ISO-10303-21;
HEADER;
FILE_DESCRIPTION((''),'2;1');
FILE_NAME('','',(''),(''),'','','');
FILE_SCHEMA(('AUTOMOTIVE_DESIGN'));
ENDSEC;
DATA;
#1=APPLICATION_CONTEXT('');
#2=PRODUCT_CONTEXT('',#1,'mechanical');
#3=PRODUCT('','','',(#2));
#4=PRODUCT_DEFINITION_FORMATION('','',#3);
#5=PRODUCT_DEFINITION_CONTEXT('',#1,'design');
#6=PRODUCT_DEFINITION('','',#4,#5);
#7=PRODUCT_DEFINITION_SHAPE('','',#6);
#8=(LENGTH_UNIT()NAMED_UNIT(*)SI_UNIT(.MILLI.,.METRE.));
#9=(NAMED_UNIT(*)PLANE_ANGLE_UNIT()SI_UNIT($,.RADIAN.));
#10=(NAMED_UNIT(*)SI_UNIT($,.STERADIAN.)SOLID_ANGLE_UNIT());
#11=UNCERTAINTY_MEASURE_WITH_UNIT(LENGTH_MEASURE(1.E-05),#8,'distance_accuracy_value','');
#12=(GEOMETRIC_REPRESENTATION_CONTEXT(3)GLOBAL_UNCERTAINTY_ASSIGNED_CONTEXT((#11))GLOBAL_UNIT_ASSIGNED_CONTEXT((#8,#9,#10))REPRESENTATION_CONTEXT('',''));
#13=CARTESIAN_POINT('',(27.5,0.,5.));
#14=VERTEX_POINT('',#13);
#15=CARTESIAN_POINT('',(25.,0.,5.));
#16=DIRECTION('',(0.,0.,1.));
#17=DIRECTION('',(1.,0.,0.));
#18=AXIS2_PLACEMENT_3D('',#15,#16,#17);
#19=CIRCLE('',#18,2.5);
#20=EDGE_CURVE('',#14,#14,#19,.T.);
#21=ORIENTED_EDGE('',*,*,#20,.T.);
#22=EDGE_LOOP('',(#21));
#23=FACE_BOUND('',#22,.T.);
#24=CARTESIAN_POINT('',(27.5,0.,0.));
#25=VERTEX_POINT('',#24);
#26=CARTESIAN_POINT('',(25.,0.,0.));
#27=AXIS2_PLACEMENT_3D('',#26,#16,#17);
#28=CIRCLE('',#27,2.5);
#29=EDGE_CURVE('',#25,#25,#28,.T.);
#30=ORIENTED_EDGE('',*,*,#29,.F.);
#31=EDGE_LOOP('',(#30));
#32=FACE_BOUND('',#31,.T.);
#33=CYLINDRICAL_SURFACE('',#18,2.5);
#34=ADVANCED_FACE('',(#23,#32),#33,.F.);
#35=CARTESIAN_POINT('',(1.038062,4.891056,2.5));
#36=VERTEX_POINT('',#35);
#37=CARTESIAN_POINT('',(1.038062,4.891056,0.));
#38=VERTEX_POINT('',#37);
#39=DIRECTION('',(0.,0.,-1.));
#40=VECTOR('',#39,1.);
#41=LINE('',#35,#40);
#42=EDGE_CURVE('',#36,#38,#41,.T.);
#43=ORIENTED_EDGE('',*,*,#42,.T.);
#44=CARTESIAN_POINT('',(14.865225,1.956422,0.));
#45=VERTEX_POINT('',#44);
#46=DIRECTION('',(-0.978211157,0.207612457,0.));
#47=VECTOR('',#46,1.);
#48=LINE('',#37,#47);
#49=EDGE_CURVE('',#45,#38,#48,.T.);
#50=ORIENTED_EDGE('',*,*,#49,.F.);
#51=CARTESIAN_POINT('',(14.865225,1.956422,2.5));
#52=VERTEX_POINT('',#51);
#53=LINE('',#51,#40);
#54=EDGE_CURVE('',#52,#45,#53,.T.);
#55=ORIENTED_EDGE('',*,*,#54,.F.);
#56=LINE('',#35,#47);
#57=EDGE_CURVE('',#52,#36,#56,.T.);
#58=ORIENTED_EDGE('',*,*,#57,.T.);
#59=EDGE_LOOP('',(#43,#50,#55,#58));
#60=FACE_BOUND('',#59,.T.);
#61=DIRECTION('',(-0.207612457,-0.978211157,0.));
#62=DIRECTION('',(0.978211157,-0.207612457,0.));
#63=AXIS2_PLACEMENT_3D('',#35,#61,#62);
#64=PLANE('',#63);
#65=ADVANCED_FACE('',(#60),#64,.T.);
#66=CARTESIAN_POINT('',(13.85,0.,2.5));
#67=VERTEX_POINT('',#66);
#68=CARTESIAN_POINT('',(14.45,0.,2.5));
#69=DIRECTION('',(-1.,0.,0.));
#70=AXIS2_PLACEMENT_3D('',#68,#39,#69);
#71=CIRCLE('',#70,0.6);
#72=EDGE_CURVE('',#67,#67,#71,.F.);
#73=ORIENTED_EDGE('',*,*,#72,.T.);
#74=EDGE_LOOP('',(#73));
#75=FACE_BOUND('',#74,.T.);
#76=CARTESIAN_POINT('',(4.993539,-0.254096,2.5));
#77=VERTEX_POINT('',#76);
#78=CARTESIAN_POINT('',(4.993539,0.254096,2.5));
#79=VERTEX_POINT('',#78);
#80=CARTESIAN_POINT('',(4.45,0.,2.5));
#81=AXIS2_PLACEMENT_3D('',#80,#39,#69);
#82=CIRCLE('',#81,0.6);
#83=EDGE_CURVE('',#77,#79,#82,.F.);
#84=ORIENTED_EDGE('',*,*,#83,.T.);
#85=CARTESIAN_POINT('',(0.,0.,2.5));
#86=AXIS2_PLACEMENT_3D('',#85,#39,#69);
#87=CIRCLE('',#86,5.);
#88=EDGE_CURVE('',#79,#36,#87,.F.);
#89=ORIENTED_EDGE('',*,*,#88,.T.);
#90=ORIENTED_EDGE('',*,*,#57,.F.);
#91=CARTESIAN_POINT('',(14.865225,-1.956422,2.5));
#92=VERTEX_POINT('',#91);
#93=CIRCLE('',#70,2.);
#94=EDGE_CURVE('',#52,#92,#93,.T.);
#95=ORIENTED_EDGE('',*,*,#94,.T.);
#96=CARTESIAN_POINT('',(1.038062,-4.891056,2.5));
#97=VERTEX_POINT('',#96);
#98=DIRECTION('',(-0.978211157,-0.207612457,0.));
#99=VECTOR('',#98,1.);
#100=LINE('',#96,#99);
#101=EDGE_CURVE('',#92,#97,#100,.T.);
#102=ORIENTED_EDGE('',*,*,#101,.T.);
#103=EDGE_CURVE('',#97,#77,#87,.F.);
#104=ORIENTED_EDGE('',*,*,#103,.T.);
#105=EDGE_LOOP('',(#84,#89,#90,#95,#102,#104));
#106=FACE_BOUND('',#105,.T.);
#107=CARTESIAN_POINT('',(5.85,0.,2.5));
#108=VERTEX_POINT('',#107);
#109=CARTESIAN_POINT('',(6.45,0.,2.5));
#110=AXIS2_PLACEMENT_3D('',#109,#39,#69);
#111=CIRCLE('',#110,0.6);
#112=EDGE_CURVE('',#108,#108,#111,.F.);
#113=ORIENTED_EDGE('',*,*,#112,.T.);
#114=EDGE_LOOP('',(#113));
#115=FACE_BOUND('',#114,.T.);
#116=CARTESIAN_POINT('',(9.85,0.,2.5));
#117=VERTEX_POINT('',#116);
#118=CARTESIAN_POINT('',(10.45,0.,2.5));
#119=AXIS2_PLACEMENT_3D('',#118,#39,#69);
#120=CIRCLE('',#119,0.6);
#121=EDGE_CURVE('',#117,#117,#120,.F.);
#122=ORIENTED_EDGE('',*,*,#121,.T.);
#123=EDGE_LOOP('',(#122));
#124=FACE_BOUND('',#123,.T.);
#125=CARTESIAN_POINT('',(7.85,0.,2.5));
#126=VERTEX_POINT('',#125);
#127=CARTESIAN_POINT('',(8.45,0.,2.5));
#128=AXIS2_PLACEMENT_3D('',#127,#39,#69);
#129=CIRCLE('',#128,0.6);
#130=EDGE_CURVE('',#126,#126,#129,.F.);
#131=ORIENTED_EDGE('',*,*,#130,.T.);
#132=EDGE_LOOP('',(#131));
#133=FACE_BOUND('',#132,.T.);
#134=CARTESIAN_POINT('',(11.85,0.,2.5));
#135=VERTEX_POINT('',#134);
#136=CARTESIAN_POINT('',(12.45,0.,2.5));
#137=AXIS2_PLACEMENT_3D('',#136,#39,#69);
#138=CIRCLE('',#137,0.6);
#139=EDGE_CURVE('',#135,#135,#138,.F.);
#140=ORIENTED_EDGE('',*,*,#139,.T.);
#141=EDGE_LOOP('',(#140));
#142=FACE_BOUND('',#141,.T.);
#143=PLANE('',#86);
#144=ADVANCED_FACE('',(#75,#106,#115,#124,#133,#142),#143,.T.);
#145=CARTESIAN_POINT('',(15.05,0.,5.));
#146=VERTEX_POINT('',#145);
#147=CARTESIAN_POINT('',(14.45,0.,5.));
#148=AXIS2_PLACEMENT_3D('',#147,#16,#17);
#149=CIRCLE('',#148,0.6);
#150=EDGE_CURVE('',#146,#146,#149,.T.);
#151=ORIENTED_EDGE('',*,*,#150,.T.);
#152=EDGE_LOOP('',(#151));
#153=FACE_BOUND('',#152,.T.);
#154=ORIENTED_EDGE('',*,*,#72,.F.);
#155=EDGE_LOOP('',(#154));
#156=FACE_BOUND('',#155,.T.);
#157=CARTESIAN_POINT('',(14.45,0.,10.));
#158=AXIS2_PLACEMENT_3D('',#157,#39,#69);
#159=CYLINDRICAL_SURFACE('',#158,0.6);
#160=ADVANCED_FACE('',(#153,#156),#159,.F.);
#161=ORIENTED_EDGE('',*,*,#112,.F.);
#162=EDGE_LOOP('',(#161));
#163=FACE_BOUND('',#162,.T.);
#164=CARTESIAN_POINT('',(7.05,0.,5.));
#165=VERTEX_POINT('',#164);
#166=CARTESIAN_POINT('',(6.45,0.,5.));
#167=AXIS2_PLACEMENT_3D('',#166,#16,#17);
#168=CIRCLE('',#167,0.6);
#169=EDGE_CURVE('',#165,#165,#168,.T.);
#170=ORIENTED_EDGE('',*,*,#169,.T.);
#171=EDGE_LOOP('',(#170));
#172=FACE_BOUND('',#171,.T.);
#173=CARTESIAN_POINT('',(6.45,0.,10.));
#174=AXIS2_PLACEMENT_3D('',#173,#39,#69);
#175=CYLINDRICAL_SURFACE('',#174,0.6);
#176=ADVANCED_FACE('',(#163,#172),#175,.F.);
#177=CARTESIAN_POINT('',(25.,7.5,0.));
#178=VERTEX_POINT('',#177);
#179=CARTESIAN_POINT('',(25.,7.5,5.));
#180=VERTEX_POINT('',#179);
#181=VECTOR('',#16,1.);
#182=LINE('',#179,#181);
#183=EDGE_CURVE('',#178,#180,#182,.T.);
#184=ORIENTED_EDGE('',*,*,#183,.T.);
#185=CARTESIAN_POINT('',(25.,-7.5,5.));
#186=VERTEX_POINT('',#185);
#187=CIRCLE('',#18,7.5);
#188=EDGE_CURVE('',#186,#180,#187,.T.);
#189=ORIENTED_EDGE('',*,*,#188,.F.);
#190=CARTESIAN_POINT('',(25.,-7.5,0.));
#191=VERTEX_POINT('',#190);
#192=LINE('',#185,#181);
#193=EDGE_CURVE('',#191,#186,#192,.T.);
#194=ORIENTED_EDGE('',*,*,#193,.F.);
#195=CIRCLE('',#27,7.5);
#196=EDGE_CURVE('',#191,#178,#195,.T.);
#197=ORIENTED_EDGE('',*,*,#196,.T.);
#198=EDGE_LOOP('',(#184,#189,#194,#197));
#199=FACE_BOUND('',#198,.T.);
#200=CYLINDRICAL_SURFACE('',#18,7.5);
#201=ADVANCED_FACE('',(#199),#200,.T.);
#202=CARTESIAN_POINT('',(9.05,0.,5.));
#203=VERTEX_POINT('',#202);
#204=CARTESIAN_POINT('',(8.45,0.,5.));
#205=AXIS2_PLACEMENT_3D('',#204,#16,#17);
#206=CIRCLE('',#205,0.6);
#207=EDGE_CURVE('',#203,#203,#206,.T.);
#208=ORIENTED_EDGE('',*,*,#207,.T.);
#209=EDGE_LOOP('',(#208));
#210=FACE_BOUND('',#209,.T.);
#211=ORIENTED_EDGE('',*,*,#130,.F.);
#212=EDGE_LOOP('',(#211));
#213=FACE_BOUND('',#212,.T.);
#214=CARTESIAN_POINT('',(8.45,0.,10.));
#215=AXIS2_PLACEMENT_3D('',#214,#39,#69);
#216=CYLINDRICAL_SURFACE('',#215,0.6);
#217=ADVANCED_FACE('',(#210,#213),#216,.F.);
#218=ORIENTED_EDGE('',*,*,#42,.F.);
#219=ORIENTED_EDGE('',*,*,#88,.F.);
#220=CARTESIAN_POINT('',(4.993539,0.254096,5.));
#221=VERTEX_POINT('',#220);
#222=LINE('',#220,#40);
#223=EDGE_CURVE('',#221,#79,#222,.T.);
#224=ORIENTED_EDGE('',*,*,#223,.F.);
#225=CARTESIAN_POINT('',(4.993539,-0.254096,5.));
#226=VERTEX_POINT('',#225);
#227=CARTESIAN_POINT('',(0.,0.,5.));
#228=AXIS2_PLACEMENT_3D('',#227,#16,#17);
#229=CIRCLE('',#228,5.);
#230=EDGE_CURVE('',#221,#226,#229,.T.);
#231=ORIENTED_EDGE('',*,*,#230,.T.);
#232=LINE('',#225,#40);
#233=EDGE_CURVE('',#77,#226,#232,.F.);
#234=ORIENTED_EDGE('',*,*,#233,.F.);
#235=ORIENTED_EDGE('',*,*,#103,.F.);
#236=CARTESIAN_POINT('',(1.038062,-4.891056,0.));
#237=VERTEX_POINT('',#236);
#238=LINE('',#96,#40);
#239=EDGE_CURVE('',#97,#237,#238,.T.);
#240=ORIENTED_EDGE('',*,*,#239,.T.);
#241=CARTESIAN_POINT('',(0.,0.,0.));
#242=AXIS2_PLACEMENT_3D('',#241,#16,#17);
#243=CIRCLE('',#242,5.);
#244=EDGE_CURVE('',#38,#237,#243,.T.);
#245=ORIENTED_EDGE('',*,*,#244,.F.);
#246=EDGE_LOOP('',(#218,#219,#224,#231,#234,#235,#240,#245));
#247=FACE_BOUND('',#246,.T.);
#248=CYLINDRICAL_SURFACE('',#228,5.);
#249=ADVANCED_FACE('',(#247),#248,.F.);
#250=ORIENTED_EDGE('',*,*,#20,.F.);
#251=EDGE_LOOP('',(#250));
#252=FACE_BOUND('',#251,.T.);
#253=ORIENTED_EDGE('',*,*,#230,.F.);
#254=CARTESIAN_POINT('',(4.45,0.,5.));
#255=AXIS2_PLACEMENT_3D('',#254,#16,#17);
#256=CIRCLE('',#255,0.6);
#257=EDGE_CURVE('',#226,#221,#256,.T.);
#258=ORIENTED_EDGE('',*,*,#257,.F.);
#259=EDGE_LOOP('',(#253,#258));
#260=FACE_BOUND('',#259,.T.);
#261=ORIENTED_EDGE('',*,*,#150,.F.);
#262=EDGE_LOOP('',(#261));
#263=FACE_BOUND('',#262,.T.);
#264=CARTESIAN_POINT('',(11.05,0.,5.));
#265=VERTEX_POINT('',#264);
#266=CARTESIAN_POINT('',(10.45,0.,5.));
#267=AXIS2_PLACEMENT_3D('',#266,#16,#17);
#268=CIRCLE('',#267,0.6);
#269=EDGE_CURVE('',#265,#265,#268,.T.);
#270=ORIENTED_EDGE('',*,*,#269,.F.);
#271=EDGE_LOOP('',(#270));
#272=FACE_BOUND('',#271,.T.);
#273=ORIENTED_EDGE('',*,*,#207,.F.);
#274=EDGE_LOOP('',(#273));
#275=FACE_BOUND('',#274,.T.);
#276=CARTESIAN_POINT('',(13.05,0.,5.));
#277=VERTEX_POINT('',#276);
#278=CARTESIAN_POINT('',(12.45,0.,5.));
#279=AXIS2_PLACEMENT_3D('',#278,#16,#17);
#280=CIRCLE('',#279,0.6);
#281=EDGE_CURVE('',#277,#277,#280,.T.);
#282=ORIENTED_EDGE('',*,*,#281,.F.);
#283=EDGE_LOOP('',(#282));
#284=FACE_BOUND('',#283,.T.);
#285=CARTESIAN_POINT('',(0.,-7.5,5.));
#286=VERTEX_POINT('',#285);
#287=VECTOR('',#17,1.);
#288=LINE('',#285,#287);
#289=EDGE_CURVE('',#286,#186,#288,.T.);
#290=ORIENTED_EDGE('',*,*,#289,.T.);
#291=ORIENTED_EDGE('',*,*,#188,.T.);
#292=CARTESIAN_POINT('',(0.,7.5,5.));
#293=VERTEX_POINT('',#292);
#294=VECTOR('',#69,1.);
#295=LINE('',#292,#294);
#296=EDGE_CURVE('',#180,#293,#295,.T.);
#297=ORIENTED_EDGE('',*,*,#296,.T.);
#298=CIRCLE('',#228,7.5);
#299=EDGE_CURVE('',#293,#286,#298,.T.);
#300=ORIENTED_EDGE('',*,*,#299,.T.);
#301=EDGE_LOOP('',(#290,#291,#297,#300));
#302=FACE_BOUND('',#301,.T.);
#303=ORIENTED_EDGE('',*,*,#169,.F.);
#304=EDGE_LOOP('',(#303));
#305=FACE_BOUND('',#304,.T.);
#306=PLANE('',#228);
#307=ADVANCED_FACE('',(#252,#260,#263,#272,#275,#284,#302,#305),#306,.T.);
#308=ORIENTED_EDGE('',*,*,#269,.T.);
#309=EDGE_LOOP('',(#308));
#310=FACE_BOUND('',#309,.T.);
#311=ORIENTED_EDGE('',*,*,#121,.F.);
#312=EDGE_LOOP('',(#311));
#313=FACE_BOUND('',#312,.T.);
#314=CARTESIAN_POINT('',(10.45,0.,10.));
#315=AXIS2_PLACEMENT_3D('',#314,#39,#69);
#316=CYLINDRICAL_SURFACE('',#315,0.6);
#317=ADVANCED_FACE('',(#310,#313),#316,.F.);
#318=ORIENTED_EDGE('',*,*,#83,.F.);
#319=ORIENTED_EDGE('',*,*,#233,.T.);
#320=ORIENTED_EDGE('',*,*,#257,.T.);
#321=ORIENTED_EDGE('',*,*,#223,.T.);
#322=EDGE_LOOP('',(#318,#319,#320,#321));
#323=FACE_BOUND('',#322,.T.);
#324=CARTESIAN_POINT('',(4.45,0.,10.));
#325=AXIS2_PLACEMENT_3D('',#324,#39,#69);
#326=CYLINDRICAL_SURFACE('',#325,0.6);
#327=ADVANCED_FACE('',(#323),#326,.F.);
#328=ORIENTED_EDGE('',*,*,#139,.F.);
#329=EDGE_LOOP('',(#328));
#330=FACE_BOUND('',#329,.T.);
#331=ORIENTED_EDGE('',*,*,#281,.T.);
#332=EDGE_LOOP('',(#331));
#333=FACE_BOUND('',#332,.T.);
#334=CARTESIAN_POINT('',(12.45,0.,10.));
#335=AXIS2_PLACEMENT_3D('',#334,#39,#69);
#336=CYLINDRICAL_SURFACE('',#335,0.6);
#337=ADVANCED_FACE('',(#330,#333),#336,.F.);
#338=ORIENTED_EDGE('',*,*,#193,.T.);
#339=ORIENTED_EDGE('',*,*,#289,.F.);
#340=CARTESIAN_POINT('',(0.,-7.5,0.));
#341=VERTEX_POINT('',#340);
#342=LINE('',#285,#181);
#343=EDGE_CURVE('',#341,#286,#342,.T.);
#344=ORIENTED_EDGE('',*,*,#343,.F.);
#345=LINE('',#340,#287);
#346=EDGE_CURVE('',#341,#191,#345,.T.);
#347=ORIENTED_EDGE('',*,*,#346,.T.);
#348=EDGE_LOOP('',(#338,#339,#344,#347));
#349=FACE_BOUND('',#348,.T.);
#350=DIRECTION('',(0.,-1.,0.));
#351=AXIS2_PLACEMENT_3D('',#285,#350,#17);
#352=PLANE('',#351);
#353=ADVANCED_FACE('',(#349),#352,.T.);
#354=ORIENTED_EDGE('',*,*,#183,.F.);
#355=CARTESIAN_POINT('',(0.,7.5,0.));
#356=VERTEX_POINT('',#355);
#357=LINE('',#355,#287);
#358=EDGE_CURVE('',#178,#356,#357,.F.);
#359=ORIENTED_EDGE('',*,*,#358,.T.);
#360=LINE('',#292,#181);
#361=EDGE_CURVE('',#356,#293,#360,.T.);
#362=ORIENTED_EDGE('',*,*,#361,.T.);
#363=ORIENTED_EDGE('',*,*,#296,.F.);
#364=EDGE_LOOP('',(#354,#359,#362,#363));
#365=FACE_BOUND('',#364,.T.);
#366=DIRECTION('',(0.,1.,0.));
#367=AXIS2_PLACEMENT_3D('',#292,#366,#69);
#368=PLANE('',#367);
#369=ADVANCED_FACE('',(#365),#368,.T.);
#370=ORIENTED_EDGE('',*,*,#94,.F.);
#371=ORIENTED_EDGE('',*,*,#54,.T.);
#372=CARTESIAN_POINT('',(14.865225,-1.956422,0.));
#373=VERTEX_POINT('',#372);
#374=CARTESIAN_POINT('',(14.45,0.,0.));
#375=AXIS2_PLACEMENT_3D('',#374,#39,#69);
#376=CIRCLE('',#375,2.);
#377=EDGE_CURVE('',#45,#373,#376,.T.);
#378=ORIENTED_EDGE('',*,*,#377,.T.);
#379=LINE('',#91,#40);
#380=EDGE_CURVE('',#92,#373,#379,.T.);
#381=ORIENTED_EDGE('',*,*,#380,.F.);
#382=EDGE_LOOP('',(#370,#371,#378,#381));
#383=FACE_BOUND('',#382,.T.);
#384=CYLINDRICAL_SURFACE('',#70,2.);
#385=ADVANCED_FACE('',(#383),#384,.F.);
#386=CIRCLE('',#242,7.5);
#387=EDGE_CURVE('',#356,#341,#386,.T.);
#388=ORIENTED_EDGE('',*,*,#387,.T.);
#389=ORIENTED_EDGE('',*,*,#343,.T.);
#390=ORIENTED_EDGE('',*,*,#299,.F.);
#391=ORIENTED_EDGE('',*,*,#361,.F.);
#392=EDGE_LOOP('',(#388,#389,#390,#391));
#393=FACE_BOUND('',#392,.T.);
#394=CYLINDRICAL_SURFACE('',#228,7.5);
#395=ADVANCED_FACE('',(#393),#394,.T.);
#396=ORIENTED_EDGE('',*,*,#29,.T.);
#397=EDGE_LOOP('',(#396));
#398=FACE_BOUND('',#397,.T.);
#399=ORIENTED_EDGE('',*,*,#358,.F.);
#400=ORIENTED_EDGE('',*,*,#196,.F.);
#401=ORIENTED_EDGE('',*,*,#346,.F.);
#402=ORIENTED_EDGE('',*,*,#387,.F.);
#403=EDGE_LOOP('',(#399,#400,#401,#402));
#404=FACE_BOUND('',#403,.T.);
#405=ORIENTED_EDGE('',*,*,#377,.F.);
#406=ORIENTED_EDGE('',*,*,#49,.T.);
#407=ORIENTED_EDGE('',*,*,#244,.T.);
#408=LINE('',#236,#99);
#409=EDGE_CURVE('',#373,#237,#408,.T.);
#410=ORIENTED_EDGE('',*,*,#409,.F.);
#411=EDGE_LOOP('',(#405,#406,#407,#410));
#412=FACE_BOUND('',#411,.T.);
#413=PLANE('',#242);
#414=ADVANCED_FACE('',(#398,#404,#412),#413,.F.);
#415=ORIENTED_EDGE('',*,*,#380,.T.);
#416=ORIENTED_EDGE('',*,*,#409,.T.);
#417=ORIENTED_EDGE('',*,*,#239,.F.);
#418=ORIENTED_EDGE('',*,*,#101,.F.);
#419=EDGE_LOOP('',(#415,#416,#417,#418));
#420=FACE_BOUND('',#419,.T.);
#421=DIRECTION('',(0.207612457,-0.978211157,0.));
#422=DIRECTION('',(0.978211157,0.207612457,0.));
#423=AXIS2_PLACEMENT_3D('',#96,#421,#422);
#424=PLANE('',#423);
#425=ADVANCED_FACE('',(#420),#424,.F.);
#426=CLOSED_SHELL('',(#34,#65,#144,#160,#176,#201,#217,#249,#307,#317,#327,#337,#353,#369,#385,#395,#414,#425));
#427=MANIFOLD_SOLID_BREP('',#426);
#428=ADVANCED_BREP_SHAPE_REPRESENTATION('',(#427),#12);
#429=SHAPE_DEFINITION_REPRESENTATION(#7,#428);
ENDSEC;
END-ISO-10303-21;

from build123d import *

# Parameters (mm, degrees)
SKETCH1_R           = 5
SKETCH1_R_2         = 2.5
BOSS_EXTRUDE1_DEPTH = 5
SKETCH7_R           = 0.6
CUT_EXTRUDE1_DEPTH  = 10
SKETCH8_R           = 0.6
CUT_EXTRUDE2_DEPTH  = 2.5


with BuildPart() as part:
    # Sketch1 → Boss-Extrude1 (new body)
    with BuildSketch(Plane.XY):
        with BuildLine():
            Line((0, 7.5), (25, 7.5))
            ThreePointArc((25, 7.5), (32.5, 0), (25, -7.5))
            Line((25, -7.5), (0, -7.5))
            ThreePointArc((0, -7.5), (-7.5, 0), (0, 7.5))
        make_face()
        Circle(SKETCH1_R, mode=Mode.SUBTRACT)
        with Locations((25, 0)):
            Circle(SKETCH1_R_2, mode=Mode.SUBTRACT)
    extrude(amount=BOSS_EXTRUDE1_DEPTH)

    # Sketch7 → Cut-Extrude1 (cut)
    with BuildSketch(Plane(origin=(0, 0, 0), x_dir=(-1, 0, 0), z_dir=(0, 0, -1))):
        with Locations((-4.45, 0)):
            Circle(SKETCH7_R)
        with Locations((-6.45, 0)):
            Circle(SKETCH7_R)
        with Locations((-8.45, 0)):
            Circle(SKETCH7_R)
        with Locations((-10.45, 0)):
            Circle(SKETCH7_R)
        with Locations((-12.45, 0)):
            Circle(SKETCH7_R)
        with Locations((-14.45, 0)):
            Circle(SKETCH7_R)
    extrude(amount=-CUT_EXTRUDE1_DEPTH, mode=Mode.SUBTRACT)

    # Sketch8 → Cut-Extrude2 (cut)
    # profile 1 of 3: a face of its own
    with BuildSketch(Plane(origin=(0, 0, 0), x_dir=(-1, 0, 0), z_dir=(0, 0, -1))):
        with BuildLine():
            Line((-1.038062284, 4.891055785), (-14.865224913, 1.956422314))
            ThreePointArc((-14.865224913, 1.956422314), (-13.438479361, 1.72534808), (-12.54, 0.593211598))
            ThreePointArc((-12.54, 0.593211598), (-12.058847856, 0.454972527), (-11.85, 0))
            Line((-11.85, 0), (-11.05, 0))
            ThreePointArc((-11.05, 0), (-10.45, 0.6), (-9.85, 0))
            Line((-9.85, 0), (-9.05, 0))
            ThreePointArc((-9.05, 0), (-8.45, 0.6), (-7.85, 0))
            Line((-7.85, 0), (-7.05, 0))
            ThreePointArc((-7.05, 0), (-6.45, 0.6), (-5.85, 0))
            Line((-5.85, 0), (-5.05, 0))
            ThreePointArc((-5.05, 0), (-5.035714775, 0.130146849), (-4.993539326, 0.254096441))
            ThreePointArc((-4.993539326, 0.254096441), (-3.803998224, 3.244934131), (-1.038062284, 4.891055785))
        make_face()
    # profile 2 of 3: a face of its own
    with BuildSketch(Plane(origin=(0, 0, 0), x_dir=(-1, 0, 0), z_dir=(0, 0, -1))):
        with BuildLine():
            ThreePointArc((-12.54, 0.593211598), (-13.438479361, 1.72534808), (-14.865224913, 1.956422314))
            ThreePointArc((-14.865224913, 1.956422314), (-16.45, 0), (-14.865224913, -1.956422314))
            ThreePointArc((-14.865224913, -1.956422314), (-13.438479361, -1.72534808), (-12.54, -0.593211598))
            ThreePointArc((-12.54, -0.593211598), (-12.904972527, -0.391152144), (-13.05, 0))
            ThreePointArc((-13.05, 0), (-12.904972527, 0.391152144), (-12.54, 0.593211598))
        make_face()
        with Locations((-14.45, 0)):
            Circle(SKETCH8_R, mode=Mode.SUBTRACT)
    # profile 3 of 3: a face of its own
    with BuildSketch(Plane(origin=(0, 0, 0), x_dir=(-1, 0, 0), z_dir=(0, 0, -1))):
        with BuildLine():
            ThreePointArc((-12.54, -0.593211598), (-13.438479361, -1.72534808), (-14.865224913, -1.956422314))
            Line((-14.865224913, -1.956422314), (-1.038062284, -4.891055785))
            ThreePointArc((-1.038062284, -4.891055785), (-3.803998224, -3.244934131), (-4.993539326, -0.254096441))
            ThreePointArc((-4.993539326, -0.254096441), (-5.035714775, -0.130146849), (-5.05, 0))
            Line((-5.05, 0), (-5.85, 0))
            ThreePointArc((-5.85, 0), (-6.45, -0.6), (-7.05, 0))
            Line((-7.05, 0), (-7.85, 0))
            ThreePointArc((-7.85, 0), (-8.45, -0.6), (-9.05, 0))
            Line((-9.05, 0), (-9.85, 0))
            ThreePointArc((-9.85, 0), (-10.45, -0.6), (-11.05, 0))
            Line((-11.05, 0), (-11.85, 0))
            ThreePointArc((-11.85, 0), (-12.058847856, -0.454972527), (-12.54, -0.593211598))
        make_face()
    extrude(amount=-CUT_EXTRUDE2_DEPTH, mode=Mode.SUBTRACT)


with BuildPart() as cut_extrude2_kept_piece:
    # of the separate pieces the step leaves, the one the design keeps (cut_extrude2_pieces_kept)
    add(part.part.solids().sort_by_distance((11.85, 0, 5))[0])


solid = cut_extrude2_kept_piece.part
